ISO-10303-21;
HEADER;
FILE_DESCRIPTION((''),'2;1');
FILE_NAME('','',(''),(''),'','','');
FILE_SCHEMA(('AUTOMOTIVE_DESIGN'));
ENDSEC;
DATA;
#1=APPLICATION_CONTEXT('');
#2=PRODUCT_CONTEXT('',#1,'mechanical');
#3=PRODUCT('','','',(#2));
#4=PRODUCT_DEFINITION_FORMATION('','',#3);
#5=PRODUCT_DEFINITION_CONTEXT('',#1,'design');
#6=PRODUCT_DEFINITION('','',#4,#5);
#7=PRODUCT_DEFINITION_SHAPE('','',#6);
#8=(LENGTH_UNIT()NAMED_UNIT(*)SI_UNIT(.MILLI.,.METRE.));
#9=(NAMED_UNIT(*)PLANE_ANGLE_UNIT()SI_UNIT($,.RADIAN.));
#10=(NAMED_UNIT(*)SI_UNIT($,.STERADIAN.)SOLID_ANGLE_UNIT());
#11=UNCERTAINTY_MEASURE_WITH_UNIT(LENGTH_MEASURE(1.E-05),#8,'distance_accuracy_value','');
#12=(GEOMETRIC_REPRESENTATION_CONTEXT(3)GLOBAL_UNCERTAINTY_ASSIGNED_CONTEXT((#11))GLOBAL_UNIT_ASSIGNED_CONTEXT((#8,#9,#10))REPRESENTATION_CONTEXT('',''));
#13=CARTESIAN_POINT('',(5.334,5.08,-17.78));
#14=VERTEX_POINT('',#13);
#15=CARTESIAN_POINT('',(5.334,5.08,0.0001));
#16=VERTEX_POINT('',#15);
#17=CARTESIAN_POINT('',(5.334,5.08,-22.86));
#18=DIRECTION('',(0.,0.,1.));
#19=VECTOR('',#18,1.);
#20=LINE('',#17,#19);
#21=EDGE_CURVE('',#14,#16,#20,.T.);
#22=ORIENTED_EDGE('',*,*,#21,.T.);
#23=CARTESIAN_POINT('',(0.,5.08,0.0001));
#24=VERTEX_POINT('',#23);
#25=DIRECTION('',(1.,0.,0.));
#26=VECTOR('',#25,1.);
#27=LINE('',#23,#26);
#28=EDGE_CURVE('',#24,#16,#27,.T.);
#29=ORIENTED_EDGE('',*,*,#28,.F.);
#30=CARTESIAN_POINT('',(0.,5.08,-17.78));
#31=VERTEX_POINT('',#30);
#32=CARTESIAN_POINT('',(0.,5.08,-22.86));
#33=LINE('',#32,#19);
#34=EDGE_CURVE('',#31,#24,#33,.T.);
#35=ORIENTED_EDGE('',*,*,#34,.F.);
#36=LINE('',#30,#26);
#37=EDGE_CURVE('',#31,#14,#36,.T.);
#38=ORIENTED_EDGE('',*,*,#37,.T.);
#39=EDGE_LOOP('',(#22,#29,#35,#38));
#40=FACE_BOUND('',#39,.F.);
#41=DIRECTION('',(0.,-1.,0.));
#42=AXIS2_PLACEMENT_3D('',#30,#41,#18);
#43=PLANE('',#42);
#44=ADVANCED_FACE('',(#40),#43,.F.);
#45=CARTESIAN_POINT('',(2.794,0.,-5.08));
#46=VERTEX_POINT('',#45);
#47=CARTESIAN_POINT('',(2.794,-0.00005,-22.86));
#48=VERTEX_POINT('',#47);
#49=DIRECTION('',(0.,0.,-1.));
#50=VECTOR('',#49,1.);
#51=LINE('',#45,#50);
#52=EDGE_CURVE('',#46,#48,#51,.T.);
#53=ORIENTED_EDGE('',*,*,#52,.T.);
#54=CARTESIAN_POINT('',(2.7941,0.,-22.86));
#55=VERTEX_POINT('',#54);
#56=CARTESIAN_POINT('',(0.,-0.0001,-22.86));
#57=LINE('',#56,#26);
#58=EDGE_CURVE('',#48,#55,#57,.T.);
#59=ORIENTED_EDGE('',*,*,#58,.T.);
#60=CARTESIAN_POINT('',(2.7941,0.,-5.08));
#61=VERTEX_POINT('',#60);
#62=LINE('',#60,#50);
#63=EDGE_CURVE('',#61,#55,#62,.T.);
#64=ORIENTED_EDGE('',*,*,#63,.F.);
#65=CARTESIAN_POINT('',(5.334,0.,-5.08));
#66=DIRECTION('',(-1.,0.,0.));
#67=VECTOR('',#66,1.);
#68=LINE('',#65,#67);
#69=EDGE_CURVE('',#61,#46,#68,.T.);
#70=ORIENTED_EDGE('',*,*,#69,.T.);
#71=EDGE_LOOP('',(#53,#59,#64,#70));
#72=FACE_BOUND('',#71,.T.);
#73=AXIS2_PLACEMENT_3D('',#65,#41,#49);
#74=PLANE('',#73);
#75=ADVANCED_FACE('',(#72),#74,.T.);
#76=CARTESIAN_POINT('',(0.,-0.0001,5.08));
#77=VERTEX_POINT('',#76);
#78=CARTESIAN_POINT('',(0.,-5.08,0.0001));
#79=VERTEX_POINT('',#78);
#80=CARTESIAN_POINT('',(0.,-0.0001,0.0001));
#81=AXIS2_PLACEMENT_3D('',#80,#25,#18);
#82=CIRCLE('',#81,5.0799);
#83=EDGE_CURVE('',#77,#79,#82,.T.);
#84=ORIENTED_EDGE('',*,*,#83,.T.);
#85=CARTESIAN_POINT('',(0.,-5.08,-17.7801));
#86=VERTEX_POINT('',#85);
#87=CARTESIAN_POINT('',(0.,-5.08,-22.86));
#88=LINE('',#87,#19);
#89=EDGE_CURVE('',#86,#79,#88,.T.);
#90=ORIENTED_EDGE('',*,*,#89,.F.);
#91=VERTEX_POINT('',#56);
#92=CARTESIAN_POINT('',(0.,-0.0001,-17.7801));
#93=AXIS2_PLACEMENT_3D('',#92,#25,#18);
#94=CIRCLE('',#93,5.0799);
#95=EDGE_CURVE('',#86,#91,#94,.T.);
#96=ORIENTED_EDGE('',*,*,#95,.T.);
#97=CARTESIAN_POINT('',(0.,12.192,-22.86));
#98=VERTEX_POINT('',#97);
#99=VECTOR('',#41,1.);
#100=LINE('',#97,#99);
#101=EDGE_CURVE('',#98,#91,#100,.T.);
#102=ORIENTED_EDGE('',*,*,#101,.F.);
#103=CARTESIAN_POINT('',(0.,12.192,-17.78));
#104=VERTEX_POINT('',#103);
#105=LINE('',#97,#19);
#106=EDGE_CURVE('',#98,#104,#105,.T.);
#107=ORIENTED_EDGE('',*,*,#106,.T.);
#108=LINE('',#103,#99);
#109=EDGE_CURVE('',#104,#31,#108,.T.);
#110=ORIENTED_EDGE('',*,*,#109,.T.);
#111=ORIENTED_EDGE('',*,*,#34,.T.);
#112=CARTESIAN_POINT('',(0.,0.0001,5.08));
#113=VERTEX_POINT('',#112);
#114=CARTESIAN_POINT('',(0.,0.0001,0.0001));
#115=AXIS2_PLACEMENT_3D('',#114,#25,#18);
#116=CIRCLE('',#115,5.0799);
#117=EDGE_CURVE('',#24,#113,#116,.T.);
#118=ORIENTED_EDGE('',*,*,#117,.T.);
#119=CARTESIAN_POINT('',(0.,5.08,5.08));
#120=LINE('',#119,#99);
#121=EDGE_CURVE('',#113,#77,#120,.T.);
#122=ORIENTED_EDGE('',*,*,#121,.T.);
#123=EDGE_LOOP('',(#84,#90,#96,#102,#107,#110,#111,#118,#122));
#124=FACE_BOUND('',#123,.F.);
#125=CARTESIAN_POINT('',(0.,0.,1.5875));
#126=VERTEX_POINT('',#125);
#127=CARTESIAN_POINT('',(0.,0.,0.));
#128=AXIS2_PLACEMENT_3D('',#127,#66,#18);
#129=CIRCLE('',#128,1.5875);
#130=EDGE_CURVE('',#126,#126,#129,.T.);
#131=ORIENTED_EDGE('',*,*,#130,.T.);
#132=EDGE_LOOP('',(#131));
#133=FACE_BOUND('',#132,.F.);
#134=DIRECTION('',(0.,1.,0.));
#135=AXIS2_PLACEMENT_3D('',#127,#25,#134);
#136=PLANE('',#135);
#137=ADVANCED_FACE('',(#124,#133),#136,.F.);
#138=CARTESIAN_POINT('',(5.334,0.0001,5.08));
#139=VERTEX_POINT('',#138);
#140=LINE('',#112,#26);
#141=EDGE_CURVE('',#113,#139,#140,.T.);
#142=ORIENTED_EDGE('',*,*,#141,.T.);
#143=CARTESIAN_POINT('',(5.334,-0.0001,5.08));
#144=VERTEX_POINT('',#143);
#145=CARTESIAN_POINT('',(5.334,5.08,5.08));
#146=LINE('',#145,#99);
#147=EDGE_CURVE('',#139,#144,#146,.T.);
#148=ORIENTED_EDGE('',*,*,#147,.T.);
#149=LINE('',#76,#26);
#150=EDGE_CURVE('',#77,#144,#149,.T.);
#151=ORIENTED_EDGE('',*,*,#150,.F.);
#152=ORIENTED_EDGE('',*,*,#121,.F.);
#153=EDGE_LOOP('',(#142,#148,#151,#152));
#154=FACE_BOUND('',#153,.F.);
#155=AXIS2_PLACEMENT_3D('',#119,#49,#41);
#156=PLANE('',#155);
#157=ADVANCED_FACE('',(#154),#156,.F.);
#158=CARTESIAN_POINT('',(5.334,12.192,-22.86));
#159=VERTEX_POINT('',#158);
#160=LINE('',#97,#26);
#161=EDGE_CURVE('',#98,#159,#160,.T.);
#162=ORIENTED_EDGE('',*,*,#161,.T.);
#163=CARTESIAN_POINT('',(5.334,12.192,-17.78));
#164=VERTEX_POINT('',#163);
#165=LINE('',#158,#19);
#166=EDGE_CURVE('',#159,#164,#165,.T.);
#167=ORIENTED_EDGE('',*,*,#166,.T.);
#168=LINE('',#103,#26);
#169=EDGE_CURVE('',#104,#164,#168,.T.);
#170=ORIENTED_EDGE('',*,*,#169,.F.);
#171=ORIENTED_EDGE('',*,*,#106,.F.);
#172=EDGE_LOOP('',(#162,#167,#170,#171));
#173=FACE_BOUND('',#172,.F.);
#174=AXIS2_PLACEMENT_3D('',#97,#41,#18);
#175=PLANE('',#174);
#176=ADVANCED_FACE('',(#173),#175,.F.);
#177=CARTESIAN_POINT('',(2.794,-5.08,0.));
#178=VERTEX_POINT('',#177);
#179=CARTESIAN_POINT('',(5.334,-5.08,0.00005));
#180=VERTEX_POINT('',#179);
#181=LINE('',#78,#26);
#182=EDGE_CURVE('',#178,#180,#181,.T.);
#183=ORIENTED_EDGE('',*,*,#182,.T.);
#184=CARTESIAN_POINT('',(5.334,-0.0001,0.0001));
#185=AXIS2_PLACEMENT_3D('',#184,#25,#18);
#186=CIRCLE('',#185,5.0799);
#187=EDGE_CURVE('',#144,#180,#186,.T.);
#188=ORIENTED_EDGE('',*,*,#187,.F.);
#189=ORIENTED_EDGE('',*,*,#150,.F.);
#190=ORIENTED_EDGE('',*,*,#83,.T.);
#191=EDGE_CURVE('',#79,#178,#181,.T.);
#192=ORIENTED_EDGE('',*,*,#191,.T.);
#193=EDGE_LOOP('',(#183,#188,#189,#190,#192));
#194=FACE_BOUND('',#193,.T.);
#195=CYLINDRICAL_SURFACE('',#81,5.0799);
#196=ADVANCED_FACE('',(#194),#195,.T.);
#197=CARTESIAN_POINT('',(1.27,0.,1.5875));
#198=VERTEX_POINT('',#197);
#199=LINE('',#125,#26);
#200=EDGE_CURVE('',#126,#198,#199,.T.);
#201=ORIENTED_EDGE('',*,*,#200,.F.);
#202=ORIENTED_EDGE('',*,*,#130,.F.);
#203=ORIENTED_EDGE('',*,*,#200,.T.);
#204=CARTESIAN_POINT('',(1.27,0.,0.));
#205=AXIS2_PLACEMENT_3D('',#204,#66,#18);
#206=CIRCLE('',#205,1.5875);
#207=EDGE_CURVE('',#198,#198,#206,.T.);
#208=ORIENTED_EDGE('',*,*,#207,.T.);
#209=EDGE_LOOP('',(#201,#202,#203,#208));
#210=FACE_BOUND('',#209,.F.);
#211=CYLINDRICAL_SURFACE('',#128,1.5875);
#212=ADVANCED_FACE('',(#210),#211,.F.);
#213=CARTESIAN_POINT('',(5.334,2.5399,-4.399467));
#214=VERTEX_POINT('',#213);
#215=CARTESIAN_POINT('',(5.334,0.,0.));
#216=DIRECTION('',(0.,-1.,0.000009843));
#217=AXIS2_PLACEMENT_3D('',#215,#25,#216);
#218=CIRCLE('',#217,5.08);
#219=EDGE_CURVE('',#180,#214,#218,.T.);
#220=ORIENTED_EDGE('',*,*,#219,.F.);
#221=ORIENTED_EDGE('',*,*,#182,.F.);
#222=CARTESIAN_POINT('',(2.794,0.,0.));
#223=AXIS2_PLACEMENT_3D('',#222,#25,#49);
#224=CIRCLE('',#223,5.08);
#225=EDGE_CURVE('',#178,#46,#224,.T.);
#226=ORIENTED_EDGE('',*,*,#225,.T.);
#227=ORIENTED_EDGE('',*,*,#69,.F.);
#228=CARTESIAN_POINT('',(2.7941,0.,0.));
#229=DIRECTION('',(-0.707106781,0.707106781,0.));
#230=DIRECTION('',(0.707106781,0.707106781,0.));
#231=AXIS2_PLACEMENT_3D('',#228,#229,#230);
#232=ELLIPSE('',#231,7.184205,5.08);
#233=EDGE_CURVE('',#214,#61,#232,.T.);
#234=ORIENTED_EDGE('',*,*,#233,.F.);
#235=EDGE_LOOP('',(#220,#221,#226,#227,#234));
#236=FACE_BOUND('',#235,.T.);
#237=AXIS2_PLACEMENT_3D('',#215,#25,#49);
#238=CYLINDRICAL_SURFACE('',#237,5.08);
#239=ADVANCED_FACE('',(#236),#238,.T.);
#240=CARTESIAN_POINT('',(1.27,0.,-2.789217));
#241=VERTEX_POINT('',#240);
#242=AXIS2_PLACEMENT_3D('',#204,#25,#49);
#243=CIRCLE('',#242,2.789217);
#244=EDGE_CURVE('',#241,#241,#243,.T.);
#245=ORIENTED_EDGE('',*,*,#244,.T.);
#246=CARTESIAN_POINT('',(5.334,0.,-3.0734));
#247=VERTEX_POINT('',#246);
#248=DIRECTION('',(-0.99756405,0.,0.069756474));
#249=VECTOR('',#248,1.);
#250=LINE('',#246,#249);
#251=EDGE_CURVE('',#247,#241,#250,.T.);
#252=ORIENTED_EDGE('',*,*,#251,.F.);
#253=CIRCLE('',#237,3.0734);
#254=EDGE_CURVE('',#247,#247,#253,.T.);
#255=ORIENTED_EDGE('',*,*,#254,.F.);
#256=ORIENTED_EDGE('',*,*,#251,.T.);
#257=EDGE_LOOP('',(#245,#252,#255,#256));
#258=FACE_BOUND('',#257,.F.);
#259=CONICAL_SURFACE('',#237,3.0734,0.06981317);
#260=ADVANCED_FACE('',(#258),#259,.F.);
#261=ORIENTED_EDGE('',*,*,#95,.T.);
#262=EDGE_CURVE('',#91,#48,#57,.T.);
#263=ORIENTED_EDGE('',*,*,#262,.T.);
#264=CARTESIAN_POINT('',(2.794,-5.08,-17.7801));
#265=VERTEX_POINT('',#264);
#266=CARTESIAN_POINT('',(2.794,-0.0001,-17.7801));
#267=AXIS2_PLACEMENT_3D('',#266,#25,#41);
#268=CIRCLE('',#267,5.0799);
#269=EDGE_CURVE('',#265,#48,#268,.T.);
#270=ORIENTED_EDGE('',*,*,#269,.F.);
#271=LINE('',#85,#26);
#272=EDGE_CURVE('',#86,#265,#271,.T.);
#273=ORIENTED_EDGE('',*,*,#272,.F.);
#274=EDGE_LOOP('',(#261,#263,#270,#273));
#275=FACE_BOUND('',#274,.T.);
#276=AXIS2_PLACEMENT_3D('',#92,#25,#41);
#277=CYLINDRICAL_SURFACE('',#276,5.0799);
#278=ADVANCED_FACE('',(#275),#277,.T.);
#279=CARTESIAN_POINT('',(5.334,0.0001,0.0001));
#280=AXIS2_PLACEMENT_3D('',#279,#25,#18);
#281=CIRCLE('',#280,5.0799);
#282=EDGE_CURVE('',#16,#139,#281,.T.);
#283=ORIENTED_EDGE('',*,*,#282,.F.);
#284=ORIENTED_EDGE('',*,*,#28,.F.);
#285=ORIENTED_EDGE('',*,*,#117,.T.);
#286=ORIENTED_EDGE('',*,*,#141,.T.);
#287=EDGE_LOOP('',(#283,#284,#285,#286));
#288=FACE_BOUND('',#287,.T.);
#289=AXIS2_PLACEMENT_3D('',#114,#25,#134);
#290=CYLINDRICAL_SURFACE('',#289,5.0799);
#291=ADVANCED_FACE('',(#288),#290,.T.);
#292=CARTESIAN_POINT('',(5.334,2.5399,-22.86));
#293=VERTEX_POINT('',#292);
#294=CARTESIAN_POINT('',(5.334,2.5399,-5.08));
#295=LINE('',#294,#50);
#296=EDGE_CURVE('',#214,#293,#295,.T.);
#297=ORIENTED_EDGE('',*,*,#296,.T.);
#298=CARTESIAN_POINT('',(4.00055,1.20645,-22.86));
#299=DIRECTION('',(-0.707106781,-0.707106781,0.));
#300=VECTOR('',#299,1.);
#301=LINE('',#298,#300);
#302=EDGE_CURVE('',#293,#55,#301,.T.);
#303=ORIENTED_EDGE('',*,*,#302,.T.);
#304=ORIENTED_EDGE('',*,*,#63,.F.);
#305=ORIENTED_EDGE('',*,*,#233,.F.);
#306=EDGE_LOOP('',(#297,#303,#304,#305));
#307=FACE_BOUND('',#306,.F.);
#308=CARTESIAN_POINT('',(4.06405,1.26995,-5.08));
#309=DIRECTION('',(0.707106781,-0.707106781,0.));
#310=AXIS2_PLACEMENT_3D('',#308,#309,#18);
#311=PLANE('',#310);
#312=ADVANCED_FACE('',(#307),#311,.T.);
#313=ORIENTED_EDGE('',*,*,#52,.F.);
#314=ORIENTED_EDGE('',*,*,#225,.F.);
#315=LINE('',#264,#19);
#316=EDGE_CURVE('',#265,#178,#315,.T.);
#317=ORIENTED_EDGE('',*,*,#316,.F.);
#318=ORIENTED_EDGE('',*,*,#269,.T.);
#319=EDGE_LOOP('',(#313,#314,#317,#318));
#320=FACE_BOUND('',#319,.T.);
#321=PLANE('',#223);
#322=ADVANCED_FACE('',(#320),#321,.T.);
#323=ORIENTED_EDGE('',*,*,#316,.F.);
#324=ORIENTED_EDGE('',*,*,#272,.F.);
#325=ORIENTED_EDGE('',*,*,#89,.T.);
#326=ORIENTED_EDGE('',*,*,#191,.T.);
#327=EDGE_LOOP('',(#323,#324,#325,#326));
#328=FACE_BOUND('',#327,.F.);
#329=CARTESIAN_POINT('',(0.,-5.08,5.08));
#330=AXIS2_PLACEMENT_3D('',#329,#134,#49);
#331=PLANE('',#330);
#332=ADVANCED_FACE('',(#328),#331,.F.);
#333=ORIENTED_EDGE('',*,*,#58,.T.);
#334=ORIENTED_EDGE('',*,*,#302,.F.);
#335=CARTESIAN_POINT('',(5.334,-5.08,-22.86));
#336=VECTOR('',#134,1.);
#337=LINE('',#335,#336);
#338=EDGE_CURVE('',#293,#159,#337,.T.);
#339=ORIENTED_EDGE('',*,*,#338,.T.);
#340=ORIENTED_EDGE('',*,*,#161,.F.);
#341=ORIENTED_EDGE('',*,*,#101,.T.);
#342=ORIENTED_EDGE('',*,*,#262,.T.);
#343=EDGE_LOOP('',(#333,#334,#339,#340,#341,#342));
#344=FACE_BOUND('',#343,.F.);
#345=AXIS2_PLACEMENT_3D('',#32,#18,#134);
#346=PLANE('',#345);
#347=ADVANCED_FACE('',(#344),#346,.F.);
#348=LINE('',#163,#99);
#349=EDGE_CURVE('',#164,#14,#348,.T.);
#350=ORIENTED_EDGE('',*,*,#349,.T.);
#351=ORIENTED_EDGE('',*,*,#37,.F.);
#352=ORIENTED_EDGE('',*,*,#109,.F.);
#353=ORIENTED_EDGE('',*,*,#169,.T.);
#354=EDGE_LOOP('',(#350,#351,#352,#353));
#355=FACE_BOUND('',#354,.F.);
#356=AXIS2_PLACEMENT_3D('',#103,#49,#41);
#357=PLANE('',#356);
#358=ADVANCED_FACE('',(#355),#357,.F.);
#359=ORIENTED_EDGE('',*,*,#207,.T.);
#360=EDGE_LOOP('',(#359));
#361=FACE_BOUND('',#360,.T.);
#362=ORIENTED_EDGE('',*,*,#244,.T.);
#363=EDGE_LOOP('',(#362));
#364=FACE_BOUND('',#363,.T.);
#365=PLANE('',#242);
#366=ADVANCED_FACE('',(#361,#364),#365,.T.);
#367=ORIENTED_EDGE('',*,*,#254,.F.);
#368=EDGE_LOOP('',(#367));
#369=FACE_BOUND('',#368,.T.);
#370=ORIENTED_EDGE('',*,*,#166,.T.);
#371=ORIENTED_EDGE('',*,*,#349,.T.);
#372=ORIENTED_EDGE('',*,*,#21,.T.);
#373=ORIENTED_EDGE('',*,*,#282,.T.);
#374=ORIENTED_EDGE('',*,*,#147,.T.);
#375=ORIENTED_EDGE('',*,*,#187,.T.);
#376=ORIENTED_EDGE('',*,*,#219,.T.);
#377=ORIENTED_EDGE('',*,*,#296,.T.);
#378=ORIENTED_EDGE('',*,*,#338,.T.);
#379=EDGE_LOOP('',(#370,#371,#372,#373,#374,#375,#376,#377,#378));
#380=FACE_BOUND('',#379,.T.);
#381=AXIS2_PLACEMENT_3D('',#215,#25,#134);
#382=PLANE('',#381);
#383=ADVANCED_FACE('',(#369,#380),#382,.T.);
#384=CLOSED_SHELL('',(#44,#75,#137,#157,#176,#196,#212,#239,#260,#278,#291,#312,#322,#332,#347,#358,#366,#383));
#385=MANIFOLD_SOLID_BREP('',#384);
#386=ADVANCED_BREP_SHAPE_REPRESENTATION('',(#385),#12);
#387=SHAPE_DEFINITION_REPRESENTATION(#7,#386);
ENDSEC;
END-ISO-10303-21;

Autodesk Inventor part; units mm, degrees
ref_plane "YZ Plane" through (0, 0, 0) normal (1, 0, 0) x (0, 1, 0)
ref_plane "XZ Plane" through (0, 0, 0) normal (0, 1, 0) x (-1, 0, 0)
ref_plane "XY Plane" through (0, 0, 0) normal (0, 0, 1) x (1, 0, 0)
sketch "Sketch1" plane through (0, 0, 0) normal (1, 0, 0) x (0, 1, 0)
  circle A0 centre (0, 0) radius 3.0734
  line L0 (5.08, 5.08) -> (-5.08, 5.08)
  line L1 (-5.08, 5.08) -> (-5.08, -22.86)
  line L2 (-5.08, -22.86) -> (5.08, -22.86)
  line L3 (5.08, -22.86) -> (5.08, 5.08)
  line L4 (-5.08, -22.86) -> (12.192, -22.86)
  line L5 (12.192, -22.86) -> (12.192, -17.78)
  line L6 (12.192, -17.78) -> (-5.08, -17.78)
  line L7 (-5.08, -17.78) -> (-5.08, -22.86)
  point P0 (5.08, -17.78)
  point P1 (5.08, -22.86)
  dimension "d0" = 6.1468
  dimension "d1" = 5.08
  dimension "d2" = 5.08
  dimension "d3" = 5.08
  dimension "d4" = 22.86
  dimension "d5" = 5.08
  dimension "d6" = 7.112
extrude "Extrusion1" add sketch "Sketch1" along normal blind 5.334
sketch "Sketch2" plane through (0, 0, 0) normal (-1, 0, 0) x (0, 0, 1)
  circle A0 centre (0, 0) radius 1.5875
  circle A1 centre (0, 0) radius 3.4736
  dimension "d9" = 3.175
extrude "Extrusion2" add sketch "Sketch2" against normal blind 5.334
fillet "Fillet1" radius 5.08 3 edges at (2.667, -5.08, -22.86) (2.667, 5.08, 5.08) (2.667, -5.08, 5.08)
sketch "Sketch3" plane through (5.334, 0, 0) normal (1, 0, 0) x (0, 0, -1)
  point P0 (0, 0)
sketch "Sketch4" plane through (5.334, 0, 0) normal (1, 0, 0) x (0, 0, -1)
  circle A0 centre (0, 0) radius 5.08
  line L0 (5.08, 0) -> (23.4096, 0)
  line L1 (23.4096, 0) -> (23.4096, -6.5655)
  line L2 (23.4096, -6.5655) -> (5.08, -6.5655)
  line L3 (5.08, -6.5655) -> (5.08, 0)
  line L4 (0, -5.08) -> (17.78, -5.08) projected
  line L5 (0, -5.08) -> (4.9426, -5.08)
  point P0 (5.08, -5.08)
extrude "Extrusion3" cut sketch "Sketch4" against normal blind 2.54 contours L3 L4 A0 | L0 L1 L2 L3
chamfer "Chamfer1" distance 2.54 angle 45 1 edges at (5.334, 0, -13.97)
sketch "Sketch6" plane through (5.334, 0, 0) normal (1, 0, 0) x (0, 0, -1)
  circle A0 centre (0, 0) radius 3.0734
  dimension "d30" = 6.1468
extrude "Extrusion5" cut sketch "Sketch6" against normal blind 4.064 draft -4
properties part number "ServoHorn"
